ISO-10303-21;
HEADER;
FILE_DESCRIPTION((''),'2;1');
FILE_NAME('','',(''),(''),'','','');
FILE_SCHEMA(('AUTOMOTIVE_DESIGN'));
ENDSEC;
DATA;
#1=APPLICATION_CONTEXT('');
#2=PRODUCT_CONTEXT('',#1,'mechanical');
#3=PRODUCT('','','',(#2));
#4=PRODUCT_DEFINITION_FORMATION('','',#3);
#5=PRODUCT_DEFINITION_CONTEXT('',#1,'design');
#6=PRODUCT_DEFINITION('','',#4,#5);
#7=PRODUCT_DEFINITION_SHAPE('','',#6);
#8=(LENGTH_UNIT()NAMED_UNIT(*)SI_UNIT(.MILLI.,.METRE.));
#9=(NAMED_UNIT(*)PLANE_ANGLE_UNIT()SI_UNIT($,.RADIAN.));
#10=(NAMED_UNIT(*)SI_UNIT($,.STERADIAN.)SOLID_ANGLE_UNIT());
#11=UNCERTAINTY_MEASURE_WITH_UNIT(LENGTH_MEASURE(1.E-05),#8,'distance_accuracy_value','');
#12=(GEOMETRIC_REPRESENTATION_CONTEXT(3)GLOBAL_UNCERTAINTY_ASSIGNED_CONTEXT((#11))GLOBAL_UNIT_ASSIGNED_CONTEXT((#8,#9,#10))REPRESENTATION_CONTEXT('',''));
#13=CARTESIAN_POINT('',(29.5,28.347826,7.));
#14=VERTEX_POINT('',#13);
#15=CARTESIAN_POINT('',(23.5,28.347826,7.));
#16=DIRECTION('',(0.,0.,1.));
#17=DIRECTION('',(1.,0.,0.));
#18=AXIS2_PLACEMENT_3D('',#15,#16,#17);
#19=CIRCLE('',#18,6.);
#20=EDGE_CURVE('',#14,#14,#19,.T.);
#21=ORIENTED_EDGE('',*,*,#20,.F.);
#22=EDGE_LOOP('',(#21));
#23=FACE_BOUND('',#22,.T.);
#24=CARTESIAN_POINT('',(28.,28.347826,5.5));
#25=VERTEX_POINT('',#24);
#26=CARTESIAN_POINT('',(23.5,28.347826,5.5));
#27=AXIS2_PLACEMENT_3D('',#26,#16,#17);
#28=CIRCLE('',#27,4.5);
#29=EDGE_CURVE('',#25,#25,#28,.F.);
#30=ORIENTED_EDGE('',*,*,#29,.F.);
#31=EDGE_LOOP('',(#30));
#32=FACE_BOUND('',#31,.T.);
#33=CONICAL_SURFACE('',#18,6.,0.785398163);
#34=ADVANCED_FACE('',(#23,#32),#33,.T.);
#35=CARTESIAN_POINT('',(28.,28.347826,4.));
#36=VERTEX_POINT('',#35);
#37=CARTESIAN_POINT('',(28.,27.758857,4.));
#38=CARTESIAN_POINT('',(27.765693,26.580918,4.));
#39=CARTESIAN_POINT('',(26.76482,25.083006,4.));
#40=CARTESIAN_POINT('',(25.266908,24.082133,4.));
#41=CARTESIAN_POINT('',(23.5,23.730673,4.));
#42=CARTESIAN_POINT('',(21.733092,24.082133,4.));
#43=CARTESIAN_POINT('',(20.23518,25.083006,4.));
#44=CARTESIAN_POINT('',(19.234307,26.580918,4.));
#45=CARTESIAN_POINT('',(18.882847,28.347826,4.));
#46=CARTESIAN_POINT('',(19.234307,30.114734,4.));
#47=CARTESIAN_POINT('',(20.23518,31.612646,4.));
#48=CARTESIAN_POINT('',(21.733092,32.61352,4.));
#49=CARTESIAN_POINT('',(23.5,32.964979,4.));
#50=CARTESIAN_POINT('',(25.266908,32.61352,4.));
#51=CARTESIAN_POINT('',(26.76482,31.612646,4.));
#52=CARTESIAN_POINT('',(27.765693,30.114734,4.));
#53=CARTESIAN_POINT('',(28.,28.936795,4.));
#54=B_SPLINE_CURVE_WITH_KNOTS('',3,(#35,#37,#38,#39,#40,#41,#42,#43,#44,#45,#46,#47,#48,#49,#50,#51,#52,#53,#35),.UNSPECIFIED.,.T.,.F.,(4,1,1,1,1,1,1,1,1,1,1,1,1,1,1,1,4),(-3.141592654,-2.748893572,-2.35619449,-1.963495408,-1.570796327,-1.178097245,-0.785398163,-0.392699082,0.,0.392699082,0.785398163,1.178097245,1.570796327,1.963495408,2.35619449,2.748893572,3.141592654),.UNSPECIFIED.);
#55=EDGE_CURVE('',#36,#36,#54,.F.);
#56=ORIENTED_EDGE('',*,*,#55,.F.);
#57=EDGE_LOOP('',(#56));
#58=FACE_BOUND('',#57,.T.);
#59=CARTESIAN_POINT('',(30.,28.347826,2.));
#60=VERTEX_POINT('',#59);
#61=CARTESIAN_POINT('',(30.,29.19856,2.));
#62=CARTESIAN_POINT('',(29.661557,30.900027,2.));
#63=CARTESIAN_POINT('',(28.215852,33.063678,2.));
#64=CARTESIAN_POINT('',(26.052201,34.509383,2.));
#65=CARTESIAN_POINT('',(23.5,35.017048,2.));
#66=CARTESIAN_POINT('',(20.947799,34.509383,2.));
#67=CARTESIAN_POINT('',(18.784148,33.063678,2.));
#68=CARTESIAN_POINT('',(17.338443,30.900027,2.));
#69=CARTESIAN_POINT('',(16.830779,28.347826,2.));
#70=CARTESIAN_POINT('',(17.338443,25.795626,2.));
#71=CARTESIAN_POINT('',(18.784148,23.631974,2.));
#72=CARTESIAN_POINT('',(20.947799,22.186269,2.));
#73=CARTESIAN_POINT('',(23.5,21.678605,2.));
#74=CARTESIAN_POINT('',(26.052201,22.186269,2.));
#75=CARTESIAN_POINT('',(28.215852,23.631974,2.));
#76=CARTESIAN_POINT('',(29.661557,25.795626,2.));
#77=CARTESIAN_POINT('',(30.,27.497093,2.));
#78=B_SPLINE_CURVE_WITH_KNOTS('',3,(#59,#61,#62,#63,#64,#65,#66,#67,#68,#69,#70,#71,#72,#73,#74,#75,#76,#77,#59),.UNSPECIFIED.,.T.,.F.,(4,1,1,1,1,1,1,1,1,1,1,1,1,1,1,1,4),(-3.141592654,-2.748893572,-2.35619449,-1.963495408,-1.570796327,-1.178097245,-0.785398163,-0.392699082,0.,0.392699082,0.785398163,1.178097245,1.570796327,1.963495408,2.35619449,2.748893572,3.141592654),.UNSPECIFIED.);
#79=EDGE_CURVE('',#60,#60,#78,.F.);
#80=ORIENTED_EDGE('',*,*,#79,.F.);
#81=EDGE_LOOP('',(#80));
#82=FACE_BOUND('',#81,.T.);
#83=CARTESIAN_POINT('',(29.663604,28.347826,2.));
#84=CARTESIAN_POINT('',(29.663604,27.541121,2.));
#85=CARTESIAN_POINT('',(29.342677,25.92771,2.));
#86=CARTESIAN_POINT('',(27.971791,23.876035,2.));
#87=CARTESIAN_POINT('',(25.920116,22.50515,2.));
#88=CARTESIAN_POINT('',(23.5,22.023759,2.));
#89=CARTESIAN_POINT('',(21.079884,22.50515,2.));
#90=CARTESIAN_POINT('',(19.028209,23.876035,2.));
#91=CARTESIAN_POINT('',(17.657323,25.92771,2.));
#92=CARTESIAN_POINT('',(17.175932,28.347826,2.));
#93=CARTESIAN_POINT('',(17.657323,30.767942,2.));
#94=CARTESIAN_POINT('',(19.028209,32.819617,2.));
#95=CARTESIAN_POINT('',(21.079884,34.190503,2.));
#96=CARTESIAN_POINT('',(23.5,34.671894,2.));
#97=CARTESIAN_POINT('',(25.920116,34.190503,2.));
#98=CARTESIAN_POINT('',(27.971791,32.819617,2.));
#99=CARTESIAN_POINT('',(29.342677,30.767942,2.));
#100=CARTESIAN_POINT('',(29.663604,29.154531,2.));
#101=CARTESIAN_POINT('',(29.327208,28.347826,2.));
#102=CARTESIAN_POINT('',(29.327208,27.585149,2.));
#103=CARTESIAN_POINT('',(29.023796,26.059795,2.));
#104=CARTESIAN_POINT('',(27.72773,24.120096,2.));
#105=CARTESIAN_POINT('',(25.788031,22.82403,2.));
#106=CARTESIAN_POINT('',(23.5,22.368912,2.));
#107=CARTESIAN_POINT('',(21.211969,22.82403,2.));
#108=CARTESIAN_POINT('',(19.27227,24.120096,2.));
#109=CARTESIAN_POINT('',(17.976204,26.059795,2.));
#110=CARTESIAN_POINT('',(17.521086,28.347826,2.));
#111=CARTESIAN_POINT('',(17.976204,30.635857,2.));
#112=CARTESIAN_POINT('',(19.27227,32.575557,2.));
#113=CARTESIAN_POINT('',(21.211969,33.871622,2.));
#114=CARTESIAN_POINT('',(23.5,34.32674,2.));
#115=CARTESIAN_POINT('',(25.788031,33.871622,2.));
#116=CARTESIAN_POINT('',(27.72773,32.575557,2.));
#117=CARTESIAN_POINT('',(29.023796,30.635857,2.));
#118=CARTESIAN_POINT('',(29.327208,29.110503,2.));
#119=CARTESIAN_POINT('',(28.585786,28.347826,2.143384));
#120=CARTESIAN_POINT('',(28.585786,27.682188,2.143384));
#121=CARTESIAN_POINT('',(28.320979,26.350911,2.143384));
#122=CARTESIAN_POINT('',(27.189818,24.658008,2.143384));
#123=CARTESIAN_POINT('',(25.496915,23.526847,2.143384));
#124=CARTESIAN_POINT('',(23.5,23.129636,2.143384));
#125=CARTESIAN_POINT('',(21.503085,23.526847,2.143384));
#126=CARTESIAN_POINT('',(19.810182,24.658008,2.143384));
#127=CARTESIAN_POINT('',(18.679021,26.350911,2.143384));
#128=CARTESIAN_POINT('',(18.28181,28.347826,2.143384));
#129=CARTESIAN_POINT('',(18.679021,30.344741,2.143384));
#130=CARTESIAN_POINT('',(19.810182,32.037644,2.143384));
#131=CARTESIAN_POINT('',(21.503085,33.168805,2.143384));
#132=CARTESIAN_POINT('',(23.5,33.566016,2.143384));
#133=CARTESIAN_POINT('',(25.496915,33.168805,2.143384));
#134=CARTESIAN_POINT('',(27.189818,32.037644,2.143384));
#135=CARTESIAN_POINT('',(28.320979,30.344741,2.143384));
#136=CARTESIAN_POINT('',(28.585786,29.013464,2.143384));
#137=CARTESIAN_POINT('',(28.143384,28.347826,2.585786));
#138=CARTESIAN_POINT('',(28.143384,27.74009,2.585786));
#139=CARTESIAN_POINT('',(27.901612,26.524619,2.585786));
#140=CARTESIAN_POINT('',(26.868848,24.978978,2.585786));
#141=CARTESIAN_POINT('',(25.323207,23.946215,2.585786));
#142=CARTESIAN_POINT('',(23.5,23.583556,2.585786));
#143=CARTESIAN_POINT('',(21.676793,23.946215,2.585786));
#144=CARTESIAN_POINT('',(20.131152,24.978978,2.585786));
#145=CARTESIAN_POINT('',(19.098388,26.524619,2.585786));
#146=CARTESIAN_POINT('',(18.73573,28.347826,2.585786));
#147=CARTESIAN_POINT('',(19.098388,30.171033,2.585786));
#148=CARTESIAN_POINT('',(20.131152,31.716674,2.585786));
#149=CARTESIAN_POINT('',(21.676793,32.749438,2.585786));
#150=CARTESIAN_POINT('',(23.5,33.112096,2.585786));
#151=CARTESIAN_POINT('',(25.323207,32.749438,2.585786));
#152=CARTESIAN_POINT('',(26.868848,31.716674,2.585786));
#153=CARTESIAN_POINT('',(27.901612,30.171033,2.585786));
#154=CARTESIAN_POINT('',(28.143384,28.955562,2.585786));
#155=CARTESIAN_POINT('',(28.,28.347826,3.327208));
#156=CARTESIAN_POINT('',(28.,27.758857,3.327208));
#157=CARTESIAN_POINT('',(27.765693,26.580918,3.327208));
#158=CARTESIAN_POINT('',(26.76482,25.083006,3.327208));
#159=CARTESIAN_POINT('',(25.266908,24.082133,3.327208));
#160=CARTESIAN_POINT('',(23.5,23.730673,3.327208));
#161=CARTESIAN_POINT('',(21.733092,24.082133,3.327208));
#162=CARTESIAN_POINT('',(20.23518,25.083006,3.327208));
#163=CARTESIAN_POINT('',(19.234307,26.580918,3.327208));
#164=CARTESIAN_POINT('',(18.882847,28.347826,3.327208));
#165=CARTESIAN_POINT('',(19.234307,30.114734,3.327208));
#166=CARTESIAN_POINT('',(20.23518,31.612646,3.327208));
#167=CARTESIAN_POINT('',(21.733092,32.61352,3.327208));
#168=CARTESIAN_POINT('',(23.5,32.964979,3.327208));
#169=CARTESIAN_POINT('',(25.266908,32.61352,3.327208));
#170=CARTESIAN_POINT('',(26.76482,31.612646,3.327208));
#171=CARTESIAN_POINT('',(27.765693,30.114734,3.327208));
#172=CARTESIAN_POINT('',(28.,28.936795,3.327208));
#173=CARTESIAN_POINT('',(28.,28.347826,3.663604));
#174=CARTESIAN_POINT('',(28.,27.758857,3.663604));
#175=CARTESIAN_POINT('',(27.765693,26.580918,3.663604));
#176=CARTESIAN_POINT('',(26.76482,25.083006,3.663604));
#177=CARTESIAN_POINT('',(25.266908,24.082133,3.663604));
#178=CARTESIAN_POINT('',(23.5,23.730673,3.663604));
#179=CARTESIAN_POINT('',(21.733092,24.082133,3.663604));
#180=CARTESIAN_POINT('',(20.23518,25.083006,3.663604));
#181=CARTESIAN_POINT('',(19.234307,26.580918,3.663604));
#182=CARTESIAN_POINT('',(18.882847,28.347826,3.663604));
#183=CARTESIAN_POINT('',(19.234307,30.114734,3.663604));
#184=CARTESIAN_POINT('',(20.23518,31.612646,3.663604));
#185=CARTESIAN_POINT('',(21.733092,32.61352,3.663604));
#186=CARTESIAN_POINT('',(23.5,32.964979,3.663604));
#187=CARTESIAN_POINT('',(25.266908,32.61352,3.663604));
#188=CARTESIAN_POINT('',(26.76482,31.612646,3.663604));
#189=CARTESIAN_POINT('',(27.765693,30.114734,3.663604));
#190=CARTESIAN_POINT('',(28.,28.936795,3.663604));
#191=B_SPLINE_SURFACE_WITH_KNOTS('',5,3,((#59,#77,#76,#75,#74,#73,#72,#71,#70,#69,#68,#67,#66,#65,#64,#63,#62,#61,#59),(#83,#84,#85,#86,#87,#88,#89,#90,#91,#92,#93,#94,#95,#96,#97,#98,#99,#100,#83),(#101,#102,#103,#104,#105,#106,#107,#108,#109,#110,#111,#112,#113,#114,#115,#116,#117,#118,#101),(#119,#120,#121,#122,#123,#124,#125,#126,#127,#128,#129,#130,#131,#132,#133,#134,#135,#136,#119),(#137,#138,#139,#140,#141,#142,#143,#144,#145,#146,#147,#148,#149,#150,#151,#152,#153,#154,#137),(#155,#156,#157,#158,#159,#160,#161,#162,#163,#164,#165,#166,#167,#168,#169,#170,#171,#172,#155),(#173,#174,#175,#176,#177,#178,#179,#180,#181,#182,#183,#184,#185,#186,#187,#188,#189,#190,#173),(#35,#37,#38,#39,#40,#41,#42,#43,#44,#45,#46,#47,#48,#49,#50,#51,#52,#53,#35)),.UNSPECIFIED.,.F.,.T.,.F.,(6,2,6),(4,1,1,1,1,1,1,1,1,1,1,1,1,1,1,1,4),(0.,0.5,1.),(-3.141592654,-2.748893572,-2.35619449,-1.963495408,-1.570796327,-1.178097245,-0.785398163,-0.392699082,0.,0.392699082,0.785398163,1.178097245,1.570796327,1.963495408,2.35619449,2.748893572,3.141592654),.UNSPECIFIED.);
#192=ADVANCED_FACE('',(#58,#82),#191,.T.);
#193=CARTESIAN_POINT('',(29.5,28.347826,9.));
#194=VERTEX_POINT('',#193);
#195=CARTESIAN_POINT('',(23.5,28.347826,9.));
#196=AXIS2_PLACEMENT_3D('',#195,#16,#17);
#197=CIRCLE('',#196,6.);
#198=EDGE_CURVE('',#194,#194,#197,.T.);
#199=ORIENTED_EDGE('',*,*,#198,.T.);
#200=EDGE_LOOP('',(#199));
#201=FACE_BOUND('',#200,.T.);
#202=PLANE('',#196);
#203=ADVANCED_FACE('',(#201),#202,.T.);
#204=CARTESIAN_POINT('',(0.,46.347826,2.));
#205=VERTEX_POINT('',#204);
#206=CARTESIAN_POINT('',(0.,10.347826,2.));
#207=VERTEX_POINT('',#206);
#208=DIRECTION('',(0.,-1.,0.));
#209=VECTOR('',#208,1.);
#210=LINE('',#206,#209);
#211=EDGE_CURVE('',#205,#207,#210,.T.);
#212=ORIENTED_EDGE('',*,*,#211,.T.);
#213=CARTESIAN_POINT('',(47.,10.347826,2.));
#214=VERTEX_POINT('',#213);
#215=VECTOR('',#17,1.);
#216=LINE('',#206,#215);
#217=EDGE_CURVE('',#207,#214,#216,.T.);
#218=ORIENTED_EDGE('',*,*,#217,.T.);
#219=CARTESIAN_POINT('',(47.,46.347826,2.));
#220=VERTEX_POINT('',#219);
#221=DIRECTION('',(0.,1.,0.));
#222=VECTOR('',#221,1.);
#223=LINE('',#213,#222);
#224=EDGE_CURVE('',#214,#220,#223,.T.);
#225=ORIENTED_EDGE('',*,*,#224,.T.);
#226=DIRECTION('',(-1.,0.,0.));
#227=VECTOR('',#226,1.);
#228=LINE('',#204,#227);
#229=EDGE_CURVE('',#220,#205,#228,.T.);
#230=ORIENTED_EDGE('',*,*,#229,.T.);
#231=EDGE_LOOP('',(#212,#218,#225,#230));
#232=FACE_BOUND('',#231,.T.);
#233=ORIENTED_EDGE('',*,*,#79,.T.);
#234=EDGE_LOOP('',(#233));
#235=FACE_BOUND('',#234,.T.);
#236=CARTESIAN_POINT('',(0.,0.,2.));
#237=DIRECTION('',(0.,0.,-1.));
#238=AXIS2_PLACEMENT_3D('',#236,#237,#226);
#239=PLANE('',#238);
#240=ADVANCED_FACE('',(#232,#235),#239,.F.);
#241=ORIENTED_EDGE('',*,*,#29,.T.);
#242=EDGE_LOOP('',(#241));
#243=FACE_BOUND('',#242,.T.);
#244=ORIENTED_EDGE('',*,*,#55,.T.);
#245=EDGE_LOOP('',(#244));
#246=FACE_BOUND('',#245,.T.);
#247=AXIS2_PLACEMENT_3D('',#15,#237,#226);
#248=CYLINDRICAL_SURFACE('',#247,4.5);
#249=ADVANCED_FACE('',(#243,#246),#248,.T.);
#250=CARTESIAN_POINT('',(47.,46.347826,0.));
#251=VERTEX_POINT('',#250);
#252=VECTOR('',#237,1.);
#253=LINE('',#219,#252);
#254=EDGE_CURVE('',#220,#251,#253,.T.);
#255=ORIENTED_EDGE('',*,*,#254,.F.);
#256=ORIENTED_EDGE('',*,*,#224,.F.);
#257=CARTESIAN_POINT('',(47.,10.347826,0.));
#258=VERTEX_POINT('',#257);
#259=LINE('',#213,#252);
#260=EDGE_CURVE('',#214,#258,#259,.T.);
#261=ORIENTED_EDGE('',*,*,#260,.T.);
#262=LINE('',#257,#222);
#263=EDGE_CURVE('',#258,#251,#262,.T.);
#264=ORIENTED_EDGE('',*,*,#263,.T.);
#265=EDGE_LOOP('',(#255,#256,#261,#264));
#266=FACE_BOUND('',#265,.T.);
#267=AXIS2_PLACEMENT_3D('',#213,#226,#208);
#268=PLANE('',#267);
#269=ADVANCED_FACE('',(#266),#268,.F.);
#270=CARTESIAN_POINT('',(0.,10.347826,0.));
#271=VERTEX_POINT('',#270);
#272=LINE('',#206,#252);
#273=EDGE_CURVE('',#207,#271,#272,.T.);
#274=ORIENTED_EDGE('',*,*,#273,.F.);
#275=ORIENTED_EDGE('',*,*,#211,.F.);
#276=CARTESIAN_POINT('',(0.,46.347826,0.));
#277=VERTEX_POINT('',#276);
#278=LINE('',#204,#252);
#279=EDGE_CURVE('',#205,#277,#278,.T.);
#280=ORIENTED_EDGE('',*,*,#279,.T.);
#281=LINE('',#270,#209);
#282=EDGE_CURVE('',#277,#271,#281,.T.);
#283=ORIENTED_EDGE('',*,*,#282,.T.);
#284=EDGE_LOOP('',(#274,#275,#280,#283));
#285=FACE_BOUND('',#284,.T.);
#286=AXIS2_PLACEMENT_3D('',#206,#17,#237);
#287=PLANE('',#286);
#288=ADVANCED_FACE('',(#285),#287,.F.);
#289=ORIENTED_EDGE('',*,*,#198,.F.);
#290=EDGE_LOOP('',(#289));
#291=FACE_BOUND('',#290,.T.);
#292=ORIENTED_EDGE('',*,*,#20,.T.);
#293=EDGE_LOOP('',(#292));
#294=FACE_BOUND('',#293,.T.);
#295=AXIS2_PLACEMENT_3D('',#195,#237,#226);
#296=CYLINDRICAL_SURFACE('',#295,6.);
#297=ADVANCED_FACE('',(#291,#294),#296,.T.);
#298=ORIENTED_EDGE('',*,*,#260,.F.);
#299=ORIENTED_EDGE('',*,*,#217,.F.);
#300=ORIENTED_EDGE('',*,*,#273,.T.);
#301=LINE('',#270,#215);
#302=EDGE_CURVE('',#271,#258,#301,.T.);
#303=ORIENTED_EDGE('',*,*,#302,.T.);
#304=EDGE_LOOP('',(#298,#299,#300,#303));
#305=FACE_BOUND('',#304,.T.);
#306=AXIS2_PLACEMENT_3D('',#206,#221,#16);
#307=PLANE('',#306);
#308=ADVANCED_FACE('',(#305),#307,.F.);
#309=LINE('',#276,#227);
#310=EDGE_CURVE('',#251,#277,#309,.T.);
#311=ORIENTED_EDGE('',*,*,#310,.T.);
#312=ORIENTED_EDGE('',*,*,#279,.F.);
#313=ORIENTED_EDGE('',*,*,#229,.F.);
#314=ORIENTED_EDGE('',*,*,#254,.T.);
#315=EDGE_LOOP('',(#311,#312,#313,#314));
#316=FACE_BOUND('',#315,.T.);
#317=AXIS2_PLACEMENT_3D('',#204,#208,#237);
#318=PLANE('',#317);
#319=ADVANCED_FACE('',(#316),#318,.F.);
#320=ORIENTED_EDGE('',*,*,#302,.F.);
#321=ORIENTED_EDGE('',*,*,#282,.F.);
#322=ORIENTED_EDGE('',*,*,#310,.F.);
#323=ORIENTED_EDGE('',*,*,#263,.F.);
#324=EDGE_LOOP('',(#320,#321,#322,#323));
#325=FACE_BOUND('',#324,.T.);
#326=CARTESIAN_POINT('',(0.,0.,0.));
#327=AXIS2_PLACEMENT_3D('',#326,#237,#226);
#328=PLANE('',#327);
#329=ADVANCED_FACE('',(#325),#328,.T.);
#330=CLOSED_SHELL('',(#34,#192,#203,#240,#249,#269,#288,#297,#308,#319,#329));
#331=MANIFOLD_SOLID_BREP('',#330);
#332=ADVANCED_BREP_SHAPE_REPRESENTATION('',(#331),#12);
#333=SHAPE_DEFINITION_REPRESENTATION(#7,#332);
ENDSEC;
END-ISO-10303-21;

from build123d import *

# Parameters (mm, degrees)
SKETCH1_W           = 47
SKETCH1_H           = 36
BOSS_EXTRUDE1_DEPTH = 2
SKETCH2_R           = 4.5
BOSS_EXTRUDE2_DEPTH = 5
SKETCH3_R           = 6
BOSS_EXTRUDE3_DEPTH = 2
FILLET1_SIZE        = 2
CHAMFER1_SIZE       = 1.5


# Some blends are built 0.0001 mm under size
with BuildPart() as part:
    # Sketch1 → Boss-Extrude1 (new body)
    with BuildSketch(Plane.XY):
        with Locations((23.5, 28.347826087)):
            Rectangle(SKETCH1_W, SKETCH1_H)
    extrude(amount=BOSS_EXTRUDE1_DEPTH)

    # Sketch2 → Boss-Extrude2 (add)
    with BuildSketch(Plane.XY.offset(2)):
        with Locations((23.5, 28.347826087)):
            Circle(SKETCH2_R)
    extrude(amount=BOSS_EXTRUDE2_DEPTH)

    # Sketch3 → Boss-Extrude3 (add)
    with BuildSketch(Plane.XY.offset(7)):
        with Locations((23.5, 28.347826087)):
            Circle(SKETCH3_R)
    extrude(amount=BOSS_EXTRUDE3_DEPTH)

    # Fillet1
    # a fillet whose section is not a circle: 2 mm, written as the material it adds along each edge
    with BuildSketch(Plane(origin=(23.5, 28.347826087, 2), x_dir=(1, 0, 0), z_dir=(0, -1, 0))) as fillet1_piece_1:
        with BuildLine():
            add(Edge.make_bspline([(4.5, FILLET1_SIZE), (4.5, FILLET1_SIZE * 0.831801948466), (4.5, FILLET1_SIZE * 0.663603896932), (4.5 + FILLET1_SIZE * 0.0716919198361, FILLET1_SIZE * 0.292893218813), (4.5 + FILLET1_SIZE * 0.292893218813, FILLET1_SIZE * 0.0716919198361), (4.5 + FILLET1_SIZE * 0.663603896932, 0), (4.5 + FILLET1_SIZE * 0.831801948466, 0), (4.5 + FILLET1_SIZE, 0)], knots=[0, 0, 0, 0, 0, 0, 0.5, 0.5, 1, 1, 1, 1, 1, 1], degree=5))
            Line((4.5 + FILLET1_SIZE, 0), (4.5, 0))
            Line((4.5, 0), (4.5, FILLET1_SIZE))
        make_face()
    revolve(axis=Axis((23.5, 28.347826087, 2), (0, 0, 1)))

    # Chamfer1
    chamfer1_edges = [part.edges().sort_by_distance(p)[0] for p in [
        (19, 28.347826087, 7),
    ]]
    chamfer(chamfer1_edges, length=CHAMFER1_SIZE - 0.0001)  # a hair under: the kernel refuses the full size


solid = part.part
